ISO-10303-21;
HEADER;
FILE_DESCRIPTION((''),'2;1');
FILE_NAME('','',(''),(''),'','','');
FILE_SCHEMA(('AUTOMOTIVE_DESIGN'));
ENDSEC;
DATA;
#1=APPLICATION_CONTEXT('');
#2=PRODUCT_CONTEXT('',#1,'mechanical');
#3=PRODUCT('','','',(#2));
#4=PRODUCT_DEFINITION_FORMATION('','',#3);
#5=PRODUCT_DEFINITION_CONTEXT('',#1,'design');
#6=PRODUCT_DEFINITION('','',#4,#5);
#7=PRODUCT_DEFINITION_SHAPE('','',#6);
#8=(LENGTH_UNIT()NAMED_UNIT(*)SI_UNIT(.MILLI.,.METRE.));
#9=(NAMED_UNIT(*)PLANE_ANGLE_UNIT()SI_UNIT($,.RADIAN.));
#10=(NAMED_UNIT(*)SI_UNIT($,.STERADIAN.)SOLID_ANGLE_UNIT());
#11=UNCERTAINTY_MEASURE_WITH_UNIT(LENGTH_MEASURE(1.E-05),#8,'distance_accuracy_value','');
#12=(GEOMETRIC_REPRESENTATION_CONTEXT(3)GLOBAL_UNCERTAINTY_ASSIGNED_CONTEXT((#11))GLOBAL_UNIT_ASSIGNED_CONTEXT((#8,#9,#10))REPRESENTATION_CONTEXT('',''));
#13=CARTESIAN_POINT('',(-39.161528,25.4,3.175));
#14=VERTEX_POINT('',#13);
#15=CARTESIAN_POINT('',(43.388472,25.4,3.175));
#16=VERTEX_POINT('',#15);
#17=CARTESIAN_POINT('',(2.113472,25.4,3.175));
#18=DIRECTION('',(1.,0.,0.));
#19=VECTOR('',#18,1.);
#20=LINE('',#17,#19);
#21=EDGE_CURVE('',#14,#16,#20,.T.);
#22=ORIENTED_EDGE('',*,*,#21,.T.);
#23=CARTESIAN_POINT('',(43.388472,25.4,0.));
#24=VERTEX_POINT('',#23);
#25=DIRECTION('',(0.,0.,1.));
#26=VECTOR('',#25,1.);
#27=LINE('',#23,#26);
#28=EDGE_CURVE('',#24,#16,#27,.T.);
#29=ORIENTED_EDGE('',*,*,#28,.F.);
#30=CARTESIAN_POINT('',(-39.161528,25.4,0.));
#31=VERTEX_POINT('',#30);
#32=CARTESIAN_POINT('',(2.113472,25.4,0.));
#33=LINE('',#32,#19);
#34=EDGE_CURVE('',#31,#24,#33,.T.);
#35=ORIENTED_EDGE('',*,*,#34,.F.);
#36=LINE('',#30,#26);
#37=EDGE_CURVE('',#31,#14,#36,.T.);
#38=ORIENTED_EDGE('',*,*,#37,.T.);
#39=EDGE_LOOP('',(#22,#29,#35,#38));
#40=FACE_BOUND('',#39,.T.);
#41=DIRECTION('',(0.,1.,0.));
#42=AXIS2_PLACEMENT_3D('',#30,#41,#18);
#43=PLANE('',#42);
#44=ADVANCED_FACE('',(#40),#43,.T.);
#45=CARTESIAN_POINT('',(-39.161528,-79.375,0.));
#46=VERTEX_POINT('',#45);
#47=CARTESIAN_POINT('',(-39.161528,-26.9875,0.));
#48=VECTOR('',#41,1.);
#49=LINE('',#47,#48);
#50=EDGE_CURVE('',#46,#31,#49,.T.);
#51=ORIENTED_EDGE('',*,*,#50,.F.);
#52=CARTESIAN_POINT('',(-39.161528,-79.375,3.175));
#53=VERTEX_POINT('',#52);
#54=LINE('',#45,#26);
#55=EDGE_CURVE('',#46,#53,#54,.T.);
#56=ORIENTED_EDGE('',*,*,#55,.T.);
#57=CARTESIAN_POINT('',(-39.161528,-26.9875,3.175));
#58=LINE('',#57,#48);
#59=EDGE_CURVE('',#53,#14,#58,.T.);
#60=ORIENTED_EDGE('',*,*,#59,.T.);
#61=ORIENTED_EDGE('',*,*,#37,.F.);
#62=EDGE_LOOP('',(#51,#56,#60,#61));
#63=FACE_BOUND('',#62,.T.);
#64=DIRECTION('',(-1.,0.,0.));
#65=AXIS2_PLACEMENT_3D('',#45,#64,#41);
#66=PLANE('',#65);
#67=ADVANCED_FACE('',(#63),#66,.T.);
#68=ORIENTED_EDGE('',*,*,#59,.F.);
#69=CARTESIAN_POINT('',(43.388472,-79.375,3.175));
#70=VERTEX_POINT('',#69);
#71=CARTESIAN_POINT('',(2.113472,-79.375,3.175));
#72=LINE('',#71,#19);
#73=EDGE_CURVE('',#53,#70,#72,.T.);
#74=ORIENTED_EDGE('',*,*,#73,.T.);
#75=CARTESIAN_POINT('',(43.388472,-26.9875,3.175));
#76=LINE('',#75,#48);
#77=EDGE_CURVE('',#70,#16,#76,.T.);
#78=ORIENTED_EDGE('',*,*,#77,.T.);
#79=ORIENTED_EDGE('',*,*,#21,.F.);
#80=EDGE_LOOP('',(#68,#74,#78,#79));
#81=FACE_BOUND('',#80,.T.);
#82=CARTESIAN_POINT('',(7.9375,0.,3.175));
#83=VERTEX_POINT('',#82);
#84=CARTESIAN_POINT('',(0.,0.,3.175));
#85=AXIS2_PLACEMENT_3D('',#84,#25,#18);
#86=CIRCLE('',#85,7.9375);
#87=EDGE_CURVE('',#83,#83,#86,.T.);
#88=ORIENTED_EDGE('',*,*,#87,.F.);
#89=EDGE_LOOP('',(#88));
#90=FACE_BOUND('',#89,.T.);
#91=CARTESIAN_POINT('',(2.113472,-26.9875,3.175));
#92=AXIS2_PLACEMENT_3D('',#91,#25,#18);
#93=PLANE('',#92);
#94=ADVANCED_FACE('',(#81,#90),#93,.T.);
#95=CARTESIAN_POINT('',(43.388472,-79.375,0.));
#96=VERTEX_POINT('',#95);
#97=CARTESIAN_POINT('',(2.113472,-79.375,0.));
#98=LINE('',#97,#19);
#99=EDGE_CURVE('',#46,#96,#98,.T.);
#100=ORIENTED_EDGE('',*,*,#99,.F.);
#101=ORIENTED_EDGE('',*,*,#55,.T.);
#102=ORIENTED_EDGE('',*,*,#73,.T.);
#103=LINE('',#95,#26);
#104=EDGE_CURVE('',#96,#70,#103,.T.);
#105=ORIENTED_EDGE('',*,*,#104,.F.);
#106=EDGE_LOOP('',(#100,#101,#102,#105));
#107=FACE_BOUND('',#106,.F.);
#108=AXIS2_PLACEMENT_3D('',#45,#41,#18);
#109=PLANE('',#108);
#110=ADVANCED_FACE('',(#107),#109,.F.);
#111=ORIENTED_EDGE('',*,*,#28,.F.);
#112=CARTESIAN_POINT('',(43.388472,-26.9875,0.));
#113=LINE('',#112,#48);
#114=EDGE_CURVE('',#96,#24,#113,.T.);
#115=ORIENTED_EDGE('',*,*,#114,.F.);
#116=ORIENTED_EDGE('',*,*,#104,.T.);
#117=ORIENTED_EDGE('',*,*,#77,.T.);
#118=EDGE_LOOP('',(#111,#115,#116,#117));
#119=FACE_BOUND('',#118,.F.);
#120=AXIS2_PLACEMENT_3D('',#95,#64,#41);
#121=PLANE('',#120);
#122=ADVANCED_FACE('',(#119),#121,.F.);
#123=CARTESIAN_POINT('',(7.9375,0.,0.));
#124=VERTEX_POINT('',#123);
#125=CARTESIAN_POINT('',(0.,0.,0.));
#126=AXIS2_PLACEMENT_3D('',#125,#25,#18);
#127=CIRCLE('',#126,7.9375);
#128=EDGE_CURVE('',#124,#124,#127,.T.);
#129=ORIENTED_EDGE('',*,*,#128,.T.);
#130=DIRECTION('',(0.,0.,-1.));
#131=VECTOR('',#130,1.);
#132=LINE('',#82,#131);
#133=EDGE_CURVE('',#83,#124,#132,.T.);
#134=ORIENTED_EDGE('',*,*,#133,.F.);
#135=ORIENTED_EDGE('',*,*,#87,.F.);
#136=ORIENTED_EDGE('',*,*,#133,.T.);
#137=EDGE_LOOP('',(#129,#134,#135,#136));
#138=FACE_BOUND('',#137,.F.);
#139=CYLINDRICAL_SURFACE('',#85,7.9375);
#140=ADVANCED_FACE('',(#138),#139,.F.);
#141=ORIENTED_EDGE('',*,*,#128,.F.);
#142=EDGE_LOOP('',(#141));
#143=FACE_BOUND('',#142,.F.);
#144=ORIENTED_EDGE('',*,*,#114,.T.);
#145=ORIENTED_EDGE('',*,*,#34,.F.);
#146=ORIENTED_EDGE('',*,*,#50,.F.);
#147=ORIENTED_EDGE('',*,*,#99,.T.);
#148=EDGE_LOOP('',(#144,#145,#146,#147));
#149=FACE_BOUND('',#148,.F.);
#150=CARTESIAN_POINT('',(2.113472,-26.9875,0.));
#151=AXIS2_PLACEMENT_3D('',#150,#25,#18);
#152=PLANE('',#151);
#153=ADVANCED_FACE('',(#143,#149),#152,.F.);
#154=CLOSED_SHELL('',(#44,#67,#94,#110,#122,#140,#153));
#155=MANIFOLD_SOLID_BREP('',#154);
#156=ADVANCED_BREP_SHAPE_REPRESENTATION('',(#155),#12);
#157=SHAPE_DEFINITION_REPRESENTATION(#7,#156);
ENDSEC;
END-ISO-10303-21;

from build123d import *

# Parameters (mm, degrees)
F0_W     = 82.55
F0_H     = 104.775
F1_DEPTH = 3.175
F2_R     = 7.9375
F3_DEPTH = 25.4


# Not quite as in the source:
# - a feature names something its author has since deleted; it is built from what else it names


with BuildPart() as f1:
    # F0 (on Top) → F1 (new body)
    with BuildSketch(Plane.XY):
        with Locations((2.113471739, -26.9875)):
            Rectangle(F0_W, F0_H)
    extrude(amount=F1_DEPTH)

    # F2 (on face) → F3 (cut)
    with BuildSketch(Plane.XY.offset(3.175)):
        Circle(F2_R)
    extrude(amount=-F3_DEPTH, mode=Mode.SUBTRACT)


solid = f1.part
